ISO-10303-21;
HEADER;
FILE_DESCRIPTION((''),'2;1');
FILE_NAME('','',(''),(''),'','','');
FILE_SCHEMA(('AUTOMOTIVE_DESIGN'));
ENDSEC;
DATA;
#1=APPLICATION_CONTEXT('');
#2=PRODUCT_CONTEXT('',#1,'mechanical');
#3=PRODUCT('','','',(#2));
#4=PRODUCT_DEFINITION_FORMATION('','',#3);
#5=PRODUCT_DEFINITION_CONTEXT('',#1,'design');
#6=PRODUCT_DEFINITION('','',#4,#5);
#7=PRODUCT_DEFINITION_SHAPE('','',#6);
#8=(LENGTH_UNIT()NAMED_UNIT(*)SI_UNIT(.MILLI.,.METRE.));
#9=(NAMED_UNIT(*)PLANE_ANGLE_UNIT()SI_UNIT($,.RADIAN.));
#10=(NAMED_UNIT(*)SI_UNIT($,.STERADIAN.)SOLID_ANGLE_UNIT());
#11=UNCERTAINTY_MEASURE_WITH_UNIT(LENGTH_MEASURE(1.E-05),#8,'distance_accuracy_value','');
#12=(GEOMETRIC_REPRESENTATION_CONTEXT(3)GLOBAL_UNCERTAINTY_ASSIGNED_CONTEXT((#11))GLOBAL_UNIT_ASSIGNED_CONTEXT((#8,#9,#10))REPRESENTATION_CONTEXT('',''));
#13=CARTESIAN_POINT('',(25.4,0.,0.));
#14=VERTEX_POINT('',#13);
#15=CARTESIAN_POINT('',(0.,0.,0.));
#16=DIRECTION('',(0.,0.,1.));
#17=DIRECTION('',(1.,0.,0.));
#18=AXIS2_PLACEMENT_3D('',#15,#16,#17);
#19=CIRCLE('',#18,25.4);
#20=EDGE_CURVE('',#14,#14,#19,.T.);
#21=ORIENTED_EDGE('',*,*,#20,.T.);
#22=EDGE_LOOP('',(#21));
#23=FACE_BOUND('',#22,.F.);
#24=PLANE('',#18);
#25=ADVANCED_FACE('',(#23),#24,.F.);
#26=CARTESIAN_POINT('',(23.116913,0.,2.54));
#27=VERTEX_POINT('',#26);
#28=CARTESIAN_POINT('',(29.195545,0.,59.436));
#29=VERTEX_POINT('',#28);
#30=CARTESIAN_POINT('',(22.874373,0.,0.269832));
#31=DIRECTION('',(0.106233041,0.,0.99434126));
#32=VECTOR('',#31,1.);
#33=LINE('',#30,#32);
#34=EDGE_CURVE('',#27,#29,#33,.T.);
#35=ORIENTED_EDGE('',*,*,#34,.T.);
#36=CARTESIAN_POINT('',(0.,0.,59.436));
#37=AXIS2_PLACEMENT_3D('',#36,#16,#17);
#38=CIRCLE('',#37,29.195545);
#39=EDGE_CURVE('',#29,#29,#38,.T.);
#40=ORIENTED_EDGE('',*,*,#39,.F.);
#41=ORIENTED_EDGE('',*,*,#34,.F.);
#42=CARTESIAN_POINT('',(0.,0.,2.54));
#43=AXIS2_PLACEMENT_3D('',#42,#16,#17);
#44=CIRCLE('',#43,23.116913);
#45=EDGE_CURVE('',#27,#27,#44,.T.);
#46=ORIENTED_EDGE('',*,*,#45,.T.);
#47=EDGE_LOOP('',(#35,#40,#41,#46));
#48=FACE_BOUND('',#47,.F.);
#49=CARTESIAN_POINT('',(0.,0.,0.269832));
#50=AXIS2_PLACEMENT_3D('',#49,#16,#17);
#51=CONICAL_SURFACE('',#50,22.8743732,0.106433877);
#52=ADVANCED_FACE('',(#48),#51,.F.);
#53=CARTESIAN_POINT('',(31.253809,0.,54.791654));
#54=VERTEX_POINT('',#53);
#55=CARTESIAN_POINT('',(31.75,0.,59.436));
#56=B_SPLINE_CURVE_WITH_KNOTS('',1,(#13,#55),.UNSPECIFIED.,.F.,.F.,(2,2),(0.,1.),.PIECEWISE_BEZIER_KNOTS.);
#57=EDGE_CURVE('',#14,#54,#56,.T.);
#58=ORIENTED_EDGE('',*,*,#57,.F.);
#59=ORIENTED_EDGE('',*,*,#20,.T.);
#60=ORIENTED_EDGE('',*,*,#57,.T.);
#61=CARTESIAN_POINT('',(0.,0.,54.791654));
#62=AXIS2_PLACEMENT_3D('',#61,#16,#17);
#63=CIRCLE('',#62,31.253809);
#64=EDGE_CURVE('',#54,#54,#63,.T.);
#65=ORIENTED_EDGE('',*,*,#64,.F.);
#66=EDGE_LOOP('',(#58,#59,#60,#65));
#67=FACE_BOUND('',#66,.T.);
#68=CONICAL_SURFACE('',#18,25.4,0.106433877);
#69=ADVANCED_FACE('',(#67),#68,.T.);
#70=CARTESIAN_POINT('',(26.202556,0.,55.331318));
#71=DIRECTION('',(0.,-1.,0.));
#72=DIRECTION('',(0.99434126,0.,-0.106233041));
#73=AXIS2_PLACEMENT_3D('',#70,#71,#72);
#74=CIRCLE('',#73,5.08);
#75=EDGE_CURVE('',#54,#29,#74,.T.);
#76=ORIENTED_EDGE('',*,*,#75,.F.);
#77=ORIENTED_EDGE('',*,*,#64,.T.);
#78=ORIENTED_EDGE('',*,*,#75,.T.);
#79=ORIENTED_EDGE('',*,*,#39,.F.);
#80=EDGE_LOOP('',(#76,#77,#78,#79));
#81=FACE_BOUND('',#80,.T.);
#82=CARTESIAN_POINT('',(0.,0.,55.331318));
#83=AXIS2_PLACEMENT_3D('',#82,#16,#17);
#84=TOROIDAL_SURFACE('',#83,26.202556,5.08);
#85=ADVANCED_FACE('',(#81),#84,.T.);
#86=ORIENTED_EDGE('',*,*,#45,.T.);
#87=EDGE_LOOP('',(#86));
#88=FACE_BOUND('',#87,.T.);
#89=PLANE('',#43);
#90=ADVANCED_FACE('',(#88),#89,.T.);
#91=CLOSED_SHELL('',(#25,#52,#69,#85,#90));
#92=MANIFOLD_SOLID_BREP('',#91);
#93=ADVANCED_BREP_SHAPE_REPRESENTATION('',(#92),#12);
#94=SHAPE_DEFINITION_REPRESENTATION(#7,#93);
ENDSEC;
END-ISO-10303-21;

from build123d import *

# Parameters (mm, degrees)
F0_R = 25.4
F2_R = 31.75
F4_T = -2.54


# Not quite as in the source:
# - a fillet or chamfer that OpenCascade refuses, or shapes differently, is made with other operations: its cross-section is extruded or revolved along the edge and cut away or added


with BuildPart() as f3:
    # F0 (on Top) → F3 section 0
    with BuildSketch(Plane.XY):
        Circle(F0_R)
    # F2 (on offset) → F3 section 1
    with BuildSketch(Plane.XY.offset(59.436)):
        Circle(F2_R)
    loft()

    # F4
    f4_openings = [f3.faces().sort_by_distance(p)[0] for p in [
        (0, 0, 59.436),
    ]]
    offset(amount=F4_T, openings=f4_openings, kind=Kind.INTERSECTION)

    # F5: fillet of radius 5.08 on 1 edges, made by hand

    # F5_s1 → F5_t2 (revolve, cut)
    with BuildSketch(Plane.XZ):
        with BuildLine():
            ThreePointArc((31.2538092028, 54.7916541382), (30.8469014644, 57.3895821842), (29.195545003, 59.436))
            Line((29.195545003, 59.436), (31.75, 59.436))
            Line((31.75, 59.436), (31.2538092028, 54.7916541382))
        make_face()
    revolve(axis=Axis((0, 0, 59.436), (0, 0, 1)), mode=Mode.SUBTRACT)


solid = f3.part
